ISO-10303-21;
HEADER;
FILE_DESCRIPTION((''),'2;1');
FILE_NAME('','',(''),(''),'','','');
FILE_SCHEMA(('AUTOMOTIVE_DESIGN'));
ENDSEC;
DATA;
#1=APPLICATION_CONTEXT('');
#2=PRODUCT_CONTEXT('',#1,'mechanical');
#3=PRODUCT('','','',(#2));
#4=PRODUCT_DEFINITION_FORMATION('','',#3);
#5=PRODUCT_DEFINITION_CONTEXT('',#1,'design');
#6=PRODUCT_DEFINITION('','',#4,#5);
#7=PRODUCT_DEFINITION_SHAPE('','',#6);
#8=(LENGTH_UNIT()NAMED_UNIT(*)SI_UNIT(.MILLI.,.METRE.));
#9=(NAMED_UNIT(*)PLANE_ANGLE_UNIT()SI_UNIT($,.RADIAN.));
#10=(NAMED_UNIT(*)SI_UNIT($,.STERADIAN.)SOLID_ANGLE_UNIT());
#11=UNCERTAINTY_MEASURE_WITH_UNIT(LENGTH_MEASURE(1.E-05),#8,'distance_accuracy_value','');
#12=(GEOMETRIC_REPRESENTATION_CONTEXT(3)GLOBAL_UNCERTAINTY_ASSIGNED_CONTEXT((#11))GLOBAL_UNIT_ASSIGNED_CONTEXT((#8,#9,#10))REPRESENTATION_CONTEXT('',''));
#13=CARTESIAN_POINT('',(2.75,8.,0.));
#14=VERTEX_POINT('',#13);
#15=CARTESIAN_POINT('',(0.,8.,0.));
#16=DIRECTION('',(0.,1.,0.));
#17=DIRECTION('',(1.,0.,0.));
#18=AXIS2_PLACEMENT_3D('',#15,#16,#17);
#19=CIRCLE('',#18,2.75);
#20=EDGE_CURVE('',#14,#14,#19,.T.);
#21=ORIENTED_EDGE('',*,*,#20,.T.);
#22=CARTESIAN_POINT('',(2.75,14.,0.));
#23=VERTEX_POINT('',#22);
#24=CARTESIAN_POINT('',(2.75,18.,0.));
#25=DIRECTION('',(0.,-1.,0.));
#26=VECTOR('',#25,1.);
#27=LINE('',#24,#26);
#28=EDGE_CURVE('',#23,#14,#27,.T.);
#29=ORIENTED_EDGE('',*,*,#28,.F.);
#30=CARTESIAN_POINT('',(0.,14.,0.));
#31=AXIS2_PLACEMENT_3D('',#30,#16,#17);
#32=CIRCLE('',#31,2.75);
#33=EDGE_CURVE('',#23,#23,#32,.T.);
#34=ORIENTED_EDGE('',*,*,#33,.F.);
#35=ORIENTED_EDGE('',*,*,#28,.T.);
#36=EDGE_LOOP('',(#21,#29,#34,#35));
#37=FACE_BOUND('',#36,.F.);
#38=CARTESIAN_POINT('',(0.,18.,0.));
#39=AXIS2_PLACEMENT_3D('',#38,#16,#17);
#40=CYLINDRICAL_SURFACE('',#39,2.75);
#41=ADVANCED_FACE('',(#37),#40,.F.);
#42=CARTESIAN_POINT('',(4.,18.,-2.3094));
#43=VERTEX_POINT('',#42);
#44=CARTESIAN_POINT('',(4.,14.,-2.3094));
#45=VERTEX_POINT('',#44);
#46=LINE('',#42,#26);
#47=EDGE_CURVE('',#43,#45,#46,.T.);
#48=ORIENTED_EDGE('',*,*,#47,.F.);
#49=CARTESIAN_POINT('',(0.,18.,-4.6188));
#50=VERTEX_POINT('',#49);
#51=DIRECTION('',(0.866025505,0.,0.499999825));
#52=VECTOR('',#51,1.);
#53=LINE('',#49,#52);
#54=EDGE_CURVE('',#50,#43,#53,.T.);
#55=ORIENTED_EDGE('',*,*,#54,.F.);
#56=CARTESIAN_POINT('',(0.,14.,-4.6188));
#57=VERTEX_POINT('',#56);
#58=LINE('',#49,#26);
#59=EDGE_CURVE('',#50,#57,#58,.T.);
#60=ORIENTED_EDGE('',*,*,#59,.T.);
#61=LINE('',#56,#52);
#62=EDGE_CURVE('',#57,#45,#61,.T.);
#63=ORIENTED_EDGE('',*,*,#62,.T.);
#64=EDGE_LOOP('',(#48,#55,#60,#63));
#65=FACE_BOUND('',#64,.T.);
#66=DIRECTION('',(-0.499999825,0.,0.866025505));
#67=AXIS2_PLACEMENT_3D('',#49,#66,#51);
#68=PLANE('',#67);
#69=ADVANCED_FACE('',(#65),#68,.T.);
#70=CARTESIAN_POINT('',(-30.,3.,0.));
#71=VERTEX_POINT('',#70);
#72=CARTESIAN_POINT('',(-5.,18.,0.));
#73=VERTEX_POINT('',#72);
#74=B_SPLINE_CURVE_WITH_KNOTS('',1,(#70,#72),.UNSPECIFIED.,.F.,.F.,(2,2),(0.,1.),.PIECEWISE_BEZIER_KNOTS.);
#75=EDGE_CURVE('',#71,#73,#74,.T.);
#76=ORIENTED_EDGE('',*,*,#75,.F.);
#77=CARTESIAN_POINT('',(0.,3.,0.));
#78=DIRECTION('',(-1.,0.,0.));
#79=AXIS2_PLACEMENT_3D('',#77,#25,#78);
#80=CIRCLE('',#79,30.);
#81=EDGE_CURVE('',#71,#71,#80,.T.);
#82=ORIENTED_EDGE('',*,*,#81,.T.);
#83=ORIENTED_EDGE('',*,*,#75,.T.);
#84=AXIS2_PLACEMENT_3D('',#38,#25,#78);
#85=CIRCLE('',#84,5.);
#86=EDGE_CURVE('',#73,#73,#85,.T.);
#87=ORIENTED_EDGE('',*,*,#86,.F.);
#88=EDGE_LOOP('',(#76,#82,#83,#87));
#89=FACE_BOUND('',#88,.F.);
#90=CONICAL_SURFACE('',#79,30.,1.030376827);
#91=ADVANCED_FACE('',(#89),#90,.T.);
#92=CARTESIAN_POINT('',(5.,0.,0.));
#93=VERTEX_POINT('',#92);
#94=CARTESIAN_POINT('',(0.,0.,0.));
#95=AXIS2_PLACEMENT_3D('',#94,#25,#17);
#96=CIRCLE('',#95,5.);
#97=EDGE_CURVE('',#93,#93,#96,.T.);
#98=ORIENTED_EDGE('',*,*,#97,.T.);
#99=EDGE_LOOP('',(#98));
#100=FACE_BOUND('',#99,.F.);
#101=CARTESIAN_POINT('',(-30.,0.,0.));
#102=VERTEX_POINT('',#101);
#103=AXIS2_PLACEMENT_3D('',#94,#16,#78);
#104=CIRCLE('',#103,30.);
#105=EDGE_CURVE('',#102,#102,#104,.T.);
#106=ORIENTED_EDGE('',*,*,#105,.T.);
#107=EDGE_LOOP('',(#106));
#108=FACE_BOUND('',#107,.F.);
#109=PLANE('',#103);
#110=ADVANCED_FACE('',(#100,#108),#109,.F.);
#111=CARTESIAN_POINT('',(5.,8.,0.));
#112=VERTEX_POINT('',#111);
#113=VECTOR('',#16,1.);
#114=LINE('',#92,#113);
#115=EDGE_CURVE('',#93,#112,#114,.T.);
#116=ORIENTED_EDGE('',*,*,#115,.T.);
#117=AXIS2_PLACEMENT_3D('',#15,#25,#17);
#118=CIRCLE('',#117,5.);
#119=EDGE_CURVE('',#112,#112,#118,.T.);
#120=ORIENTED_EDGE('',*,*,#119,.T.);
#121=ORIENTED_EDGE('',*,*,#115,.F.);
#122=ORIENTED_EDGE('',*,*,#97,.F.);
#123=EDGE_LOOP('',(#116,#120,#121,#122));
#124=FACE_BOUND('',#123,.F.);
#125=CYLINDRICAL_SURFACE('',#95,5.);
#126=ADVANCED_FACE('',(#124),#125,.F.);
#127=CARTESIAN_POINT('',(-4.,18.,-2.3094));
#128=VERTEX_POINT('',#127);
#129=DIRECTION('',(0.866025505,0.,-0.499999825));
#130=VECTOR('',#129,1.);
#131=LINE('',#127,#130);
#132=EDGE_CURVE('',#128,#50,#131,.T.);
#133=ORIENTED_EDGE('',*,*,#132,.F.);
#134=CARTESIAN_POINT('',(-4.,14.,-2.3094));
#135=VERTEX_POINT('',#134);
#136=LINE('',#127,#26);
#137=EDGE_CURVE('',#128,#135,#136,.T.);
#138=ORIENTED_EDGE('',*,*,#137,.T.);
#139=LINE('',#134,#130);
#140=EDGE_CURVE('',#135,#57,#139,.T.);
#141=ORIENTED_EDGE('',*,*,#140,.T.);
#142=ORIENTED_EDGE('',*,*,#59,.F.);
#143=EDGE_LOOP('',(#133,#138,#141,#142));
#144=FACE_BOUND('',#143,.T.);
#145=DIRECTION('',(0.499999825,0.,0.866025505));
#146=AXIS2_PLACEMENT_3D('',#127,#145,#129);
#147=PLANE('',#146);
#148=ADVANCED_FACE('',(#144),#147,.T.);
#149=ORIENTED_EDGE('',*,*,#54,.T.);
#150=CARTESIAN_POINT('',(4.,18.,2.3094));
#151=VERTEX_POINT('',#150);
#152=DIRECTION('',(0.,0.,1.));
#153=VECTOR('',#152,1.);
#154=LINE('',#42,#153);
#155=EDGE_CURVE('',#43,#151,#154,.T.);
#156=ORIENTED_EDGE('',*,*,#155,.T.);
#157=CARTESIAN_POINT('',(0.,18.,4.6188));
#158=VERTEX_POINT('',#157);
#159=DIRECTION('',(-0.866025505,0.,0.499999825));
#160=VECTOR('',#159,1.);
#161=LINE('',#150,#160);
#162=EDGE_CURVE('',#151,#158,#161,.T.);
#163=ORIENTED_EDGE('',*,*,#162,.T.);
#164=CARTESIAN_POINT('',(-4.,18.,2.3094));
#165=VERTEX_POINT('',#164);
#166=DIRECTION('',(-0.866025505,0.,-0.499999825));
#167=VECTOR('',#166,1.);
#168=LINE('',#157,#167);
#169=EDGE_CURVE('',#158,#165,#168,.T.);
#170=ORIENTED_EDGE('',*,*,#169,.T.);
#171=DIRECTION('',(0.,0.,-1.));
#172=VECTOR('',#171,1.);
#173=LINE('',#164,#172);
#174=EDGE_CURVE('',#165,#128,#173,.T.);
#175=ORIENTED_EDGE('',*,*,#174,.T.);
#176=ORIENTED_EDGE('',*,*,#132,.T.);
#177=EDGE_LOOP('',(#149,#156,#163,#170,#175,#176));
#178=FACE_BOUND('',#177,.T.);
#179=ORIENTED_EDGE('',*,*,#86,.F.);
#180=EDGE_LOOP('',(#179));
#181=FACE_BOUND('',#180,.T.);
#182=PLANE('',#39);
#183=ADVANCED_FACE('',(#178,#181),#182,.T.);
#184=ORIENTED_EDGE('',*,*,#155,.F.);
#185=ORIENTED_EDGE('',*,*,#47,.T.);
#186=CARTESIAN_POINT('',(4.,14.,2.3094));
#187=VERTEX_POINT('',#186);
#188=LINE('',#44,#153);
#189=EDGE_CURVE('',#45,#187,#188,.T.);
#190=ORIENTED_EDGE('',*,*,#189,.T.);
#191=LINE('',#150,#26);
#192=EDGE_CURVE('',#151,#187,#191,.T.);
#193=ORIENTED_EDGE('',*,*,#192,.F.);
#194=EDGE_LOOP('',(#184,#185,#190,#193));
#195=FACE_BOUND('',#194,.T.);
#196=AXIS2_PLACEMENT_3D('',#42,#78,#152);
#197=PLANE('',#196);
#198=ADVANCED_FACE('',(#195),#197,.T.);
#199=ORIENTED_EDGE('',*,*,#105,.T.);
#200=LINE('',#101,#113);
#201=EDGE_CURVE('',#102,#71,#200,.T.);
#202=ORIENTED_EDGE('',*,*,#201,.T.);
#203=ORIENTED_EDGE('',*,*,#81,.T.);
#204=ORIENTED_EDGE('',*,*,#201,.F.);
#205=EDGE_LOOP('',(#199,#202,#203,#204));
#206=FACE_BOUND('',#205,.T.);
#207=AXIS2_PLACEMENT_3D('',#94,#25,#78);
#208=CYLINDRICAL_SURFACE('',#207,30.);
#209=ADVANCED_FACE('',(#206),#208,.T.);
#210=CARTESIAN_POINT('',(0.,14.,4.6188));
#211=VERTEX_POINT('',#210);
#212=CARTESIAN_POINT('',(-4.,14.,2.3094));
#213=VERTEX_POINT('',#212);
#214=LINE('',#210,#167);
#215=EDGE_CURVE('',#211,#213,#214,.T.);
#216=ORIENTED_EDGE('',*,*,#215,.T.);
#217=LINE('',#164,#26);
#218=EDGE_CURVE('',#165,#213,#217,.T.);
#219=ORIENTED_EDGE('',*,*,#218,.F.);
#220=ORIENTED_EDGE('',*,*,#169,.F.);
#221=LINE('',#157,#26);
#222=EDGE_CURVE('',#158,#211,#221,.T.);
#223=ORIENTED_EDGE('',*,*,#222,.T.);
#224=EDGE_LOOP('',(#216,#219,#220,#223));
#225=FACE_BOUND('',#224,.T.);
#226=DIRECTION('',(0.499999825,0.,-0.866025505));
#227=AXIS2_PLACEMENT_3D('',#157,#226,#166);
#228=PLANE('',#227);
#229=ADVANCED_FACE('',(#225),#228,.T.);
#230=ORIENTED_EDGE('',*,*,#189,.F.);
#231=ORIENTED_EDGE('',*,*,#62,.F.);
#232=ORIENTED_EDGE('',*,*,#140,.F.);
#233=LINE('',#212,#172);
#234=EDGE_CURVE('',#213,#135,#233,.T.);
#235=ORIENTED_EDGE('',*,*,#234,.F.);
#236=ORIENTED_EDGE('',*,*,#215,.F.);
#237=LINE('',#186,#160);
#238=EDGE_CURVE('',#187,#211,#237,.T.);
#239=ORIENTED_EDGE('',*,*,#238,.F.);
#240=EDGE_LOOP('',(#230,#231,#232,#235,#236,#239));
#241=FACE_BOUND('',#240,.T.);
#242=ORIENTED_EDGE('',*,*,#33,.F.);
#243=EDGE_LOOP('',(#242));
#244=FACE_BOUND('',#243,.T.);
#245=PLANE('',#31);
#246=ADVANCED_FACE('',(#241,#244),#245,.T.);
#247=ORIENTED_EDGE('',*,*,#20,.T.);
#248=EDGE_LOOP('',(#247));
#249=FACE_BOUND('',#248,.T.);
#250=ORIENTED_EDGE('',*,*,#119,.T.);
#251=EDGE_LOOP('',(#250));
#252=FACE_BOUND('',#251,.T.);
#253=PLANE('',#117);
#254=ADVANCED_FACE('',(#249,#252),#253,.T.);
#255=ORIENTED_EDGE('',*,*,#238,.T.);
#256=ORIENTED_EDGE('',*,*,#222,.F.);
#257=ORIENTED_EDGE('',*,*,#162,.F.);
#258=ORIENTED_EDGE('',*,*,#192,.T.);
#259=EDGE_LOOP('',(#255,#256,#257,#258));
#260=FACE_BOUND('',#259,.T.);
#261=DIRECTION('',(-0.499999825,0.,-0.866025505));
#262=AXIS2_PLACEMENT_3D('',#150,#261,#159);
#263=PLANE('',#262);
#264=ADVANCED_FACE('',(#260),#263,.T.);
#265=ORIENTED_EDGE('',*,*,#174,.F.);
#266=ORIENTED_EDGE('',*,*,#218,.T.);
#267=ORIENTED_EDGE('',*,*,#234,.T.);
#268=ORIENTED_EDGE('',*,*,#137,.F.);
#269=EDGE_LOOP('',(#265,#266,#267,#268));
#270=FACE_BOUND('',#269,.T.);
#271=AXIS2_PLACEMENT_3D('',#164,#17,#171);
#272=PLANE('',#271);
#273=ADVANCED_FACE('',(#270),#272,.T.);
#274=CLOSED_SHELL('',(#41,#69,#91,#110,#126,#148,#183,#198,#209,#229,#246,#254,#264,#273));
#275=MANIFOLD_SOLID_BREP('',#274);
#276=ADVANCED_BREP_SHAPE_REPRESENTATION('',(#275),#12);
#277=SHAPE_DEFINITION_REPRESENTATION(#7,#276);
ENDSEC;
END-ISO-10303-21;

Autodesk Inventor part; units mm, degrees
ref_plane "YZ Plane" through (0, 0, 0) normal (1, 0, 0) x (0, 1, 0)
ref_plane "XZ Plane" through (0, 0, 0) normal (0, 1, 0) x (-1, 0, 0)
sketch "Sketch1" plane through (0, 0, 0) normal (0, 1, 0) x (-1, 0, 0)
  circle A0 centre (0, 0) radius 30
  dimension "d0" = 60
extrude "Extrusion1" add sketch "Sketch1" along normal blind 3
ref_plane "Work Plane1" through (0, 18, 0) normal (0, 1, 0) x (1, 0, 0)
sketch "Sketch2" plane through (0, 18, 0) normal (0, 1, 0) x (1, 0, 0)
  circle A0 centre (0, 0) radius 5
  dimension "d5" = 10
loft "Loft1" add profiles "Sketch2" section 1 edges at (30, 3, 0)
sketch "Sketch3" plane through (0, 0, 0) normal (0, -1, 0) x (1, 0, 0)
  circle A0 centre (0, 0) radius 5
  dimension "d10" = 10
extrude "Extrusion2" cut sketch "Sketch3" against normal blind 8
sketch "Sketch5" plane through (0, 18, 0) normal (0, 1, 0) x (1, 0, 0)
  circle A0 centre (0, 0) radius 2.75
  dimension "d16" = 5.5
extrude "Extrusion4" cut sketch "Sketch5" against normal through all
sketch "Sketch6" plane through (0, 18, 0) normal (0, 1, 0) x (1, 0, 0)
  line L0 (0, 4.6188) -> (4, 2.3094)
  line L1 (4, 2.3094) -> (4, -2.3094)
  line L2 (4, -2.3094) -> (0, -4.6188)
  line L3 (0, -4.6188) -> (-4, -2.3094)
  line L4 (-4, -2.3094) -> (-4, 2.3094)
  line L5 (-4, 2.3094) -> (0, 4.6188)
  point P0 (0, 0)
  point P1 (0, 0)
  dimension "d19" = 8
extrude "Extrusion5" cut sketch "Sketch6" against normal blind 4
properties part number "Bottom_Foot"
